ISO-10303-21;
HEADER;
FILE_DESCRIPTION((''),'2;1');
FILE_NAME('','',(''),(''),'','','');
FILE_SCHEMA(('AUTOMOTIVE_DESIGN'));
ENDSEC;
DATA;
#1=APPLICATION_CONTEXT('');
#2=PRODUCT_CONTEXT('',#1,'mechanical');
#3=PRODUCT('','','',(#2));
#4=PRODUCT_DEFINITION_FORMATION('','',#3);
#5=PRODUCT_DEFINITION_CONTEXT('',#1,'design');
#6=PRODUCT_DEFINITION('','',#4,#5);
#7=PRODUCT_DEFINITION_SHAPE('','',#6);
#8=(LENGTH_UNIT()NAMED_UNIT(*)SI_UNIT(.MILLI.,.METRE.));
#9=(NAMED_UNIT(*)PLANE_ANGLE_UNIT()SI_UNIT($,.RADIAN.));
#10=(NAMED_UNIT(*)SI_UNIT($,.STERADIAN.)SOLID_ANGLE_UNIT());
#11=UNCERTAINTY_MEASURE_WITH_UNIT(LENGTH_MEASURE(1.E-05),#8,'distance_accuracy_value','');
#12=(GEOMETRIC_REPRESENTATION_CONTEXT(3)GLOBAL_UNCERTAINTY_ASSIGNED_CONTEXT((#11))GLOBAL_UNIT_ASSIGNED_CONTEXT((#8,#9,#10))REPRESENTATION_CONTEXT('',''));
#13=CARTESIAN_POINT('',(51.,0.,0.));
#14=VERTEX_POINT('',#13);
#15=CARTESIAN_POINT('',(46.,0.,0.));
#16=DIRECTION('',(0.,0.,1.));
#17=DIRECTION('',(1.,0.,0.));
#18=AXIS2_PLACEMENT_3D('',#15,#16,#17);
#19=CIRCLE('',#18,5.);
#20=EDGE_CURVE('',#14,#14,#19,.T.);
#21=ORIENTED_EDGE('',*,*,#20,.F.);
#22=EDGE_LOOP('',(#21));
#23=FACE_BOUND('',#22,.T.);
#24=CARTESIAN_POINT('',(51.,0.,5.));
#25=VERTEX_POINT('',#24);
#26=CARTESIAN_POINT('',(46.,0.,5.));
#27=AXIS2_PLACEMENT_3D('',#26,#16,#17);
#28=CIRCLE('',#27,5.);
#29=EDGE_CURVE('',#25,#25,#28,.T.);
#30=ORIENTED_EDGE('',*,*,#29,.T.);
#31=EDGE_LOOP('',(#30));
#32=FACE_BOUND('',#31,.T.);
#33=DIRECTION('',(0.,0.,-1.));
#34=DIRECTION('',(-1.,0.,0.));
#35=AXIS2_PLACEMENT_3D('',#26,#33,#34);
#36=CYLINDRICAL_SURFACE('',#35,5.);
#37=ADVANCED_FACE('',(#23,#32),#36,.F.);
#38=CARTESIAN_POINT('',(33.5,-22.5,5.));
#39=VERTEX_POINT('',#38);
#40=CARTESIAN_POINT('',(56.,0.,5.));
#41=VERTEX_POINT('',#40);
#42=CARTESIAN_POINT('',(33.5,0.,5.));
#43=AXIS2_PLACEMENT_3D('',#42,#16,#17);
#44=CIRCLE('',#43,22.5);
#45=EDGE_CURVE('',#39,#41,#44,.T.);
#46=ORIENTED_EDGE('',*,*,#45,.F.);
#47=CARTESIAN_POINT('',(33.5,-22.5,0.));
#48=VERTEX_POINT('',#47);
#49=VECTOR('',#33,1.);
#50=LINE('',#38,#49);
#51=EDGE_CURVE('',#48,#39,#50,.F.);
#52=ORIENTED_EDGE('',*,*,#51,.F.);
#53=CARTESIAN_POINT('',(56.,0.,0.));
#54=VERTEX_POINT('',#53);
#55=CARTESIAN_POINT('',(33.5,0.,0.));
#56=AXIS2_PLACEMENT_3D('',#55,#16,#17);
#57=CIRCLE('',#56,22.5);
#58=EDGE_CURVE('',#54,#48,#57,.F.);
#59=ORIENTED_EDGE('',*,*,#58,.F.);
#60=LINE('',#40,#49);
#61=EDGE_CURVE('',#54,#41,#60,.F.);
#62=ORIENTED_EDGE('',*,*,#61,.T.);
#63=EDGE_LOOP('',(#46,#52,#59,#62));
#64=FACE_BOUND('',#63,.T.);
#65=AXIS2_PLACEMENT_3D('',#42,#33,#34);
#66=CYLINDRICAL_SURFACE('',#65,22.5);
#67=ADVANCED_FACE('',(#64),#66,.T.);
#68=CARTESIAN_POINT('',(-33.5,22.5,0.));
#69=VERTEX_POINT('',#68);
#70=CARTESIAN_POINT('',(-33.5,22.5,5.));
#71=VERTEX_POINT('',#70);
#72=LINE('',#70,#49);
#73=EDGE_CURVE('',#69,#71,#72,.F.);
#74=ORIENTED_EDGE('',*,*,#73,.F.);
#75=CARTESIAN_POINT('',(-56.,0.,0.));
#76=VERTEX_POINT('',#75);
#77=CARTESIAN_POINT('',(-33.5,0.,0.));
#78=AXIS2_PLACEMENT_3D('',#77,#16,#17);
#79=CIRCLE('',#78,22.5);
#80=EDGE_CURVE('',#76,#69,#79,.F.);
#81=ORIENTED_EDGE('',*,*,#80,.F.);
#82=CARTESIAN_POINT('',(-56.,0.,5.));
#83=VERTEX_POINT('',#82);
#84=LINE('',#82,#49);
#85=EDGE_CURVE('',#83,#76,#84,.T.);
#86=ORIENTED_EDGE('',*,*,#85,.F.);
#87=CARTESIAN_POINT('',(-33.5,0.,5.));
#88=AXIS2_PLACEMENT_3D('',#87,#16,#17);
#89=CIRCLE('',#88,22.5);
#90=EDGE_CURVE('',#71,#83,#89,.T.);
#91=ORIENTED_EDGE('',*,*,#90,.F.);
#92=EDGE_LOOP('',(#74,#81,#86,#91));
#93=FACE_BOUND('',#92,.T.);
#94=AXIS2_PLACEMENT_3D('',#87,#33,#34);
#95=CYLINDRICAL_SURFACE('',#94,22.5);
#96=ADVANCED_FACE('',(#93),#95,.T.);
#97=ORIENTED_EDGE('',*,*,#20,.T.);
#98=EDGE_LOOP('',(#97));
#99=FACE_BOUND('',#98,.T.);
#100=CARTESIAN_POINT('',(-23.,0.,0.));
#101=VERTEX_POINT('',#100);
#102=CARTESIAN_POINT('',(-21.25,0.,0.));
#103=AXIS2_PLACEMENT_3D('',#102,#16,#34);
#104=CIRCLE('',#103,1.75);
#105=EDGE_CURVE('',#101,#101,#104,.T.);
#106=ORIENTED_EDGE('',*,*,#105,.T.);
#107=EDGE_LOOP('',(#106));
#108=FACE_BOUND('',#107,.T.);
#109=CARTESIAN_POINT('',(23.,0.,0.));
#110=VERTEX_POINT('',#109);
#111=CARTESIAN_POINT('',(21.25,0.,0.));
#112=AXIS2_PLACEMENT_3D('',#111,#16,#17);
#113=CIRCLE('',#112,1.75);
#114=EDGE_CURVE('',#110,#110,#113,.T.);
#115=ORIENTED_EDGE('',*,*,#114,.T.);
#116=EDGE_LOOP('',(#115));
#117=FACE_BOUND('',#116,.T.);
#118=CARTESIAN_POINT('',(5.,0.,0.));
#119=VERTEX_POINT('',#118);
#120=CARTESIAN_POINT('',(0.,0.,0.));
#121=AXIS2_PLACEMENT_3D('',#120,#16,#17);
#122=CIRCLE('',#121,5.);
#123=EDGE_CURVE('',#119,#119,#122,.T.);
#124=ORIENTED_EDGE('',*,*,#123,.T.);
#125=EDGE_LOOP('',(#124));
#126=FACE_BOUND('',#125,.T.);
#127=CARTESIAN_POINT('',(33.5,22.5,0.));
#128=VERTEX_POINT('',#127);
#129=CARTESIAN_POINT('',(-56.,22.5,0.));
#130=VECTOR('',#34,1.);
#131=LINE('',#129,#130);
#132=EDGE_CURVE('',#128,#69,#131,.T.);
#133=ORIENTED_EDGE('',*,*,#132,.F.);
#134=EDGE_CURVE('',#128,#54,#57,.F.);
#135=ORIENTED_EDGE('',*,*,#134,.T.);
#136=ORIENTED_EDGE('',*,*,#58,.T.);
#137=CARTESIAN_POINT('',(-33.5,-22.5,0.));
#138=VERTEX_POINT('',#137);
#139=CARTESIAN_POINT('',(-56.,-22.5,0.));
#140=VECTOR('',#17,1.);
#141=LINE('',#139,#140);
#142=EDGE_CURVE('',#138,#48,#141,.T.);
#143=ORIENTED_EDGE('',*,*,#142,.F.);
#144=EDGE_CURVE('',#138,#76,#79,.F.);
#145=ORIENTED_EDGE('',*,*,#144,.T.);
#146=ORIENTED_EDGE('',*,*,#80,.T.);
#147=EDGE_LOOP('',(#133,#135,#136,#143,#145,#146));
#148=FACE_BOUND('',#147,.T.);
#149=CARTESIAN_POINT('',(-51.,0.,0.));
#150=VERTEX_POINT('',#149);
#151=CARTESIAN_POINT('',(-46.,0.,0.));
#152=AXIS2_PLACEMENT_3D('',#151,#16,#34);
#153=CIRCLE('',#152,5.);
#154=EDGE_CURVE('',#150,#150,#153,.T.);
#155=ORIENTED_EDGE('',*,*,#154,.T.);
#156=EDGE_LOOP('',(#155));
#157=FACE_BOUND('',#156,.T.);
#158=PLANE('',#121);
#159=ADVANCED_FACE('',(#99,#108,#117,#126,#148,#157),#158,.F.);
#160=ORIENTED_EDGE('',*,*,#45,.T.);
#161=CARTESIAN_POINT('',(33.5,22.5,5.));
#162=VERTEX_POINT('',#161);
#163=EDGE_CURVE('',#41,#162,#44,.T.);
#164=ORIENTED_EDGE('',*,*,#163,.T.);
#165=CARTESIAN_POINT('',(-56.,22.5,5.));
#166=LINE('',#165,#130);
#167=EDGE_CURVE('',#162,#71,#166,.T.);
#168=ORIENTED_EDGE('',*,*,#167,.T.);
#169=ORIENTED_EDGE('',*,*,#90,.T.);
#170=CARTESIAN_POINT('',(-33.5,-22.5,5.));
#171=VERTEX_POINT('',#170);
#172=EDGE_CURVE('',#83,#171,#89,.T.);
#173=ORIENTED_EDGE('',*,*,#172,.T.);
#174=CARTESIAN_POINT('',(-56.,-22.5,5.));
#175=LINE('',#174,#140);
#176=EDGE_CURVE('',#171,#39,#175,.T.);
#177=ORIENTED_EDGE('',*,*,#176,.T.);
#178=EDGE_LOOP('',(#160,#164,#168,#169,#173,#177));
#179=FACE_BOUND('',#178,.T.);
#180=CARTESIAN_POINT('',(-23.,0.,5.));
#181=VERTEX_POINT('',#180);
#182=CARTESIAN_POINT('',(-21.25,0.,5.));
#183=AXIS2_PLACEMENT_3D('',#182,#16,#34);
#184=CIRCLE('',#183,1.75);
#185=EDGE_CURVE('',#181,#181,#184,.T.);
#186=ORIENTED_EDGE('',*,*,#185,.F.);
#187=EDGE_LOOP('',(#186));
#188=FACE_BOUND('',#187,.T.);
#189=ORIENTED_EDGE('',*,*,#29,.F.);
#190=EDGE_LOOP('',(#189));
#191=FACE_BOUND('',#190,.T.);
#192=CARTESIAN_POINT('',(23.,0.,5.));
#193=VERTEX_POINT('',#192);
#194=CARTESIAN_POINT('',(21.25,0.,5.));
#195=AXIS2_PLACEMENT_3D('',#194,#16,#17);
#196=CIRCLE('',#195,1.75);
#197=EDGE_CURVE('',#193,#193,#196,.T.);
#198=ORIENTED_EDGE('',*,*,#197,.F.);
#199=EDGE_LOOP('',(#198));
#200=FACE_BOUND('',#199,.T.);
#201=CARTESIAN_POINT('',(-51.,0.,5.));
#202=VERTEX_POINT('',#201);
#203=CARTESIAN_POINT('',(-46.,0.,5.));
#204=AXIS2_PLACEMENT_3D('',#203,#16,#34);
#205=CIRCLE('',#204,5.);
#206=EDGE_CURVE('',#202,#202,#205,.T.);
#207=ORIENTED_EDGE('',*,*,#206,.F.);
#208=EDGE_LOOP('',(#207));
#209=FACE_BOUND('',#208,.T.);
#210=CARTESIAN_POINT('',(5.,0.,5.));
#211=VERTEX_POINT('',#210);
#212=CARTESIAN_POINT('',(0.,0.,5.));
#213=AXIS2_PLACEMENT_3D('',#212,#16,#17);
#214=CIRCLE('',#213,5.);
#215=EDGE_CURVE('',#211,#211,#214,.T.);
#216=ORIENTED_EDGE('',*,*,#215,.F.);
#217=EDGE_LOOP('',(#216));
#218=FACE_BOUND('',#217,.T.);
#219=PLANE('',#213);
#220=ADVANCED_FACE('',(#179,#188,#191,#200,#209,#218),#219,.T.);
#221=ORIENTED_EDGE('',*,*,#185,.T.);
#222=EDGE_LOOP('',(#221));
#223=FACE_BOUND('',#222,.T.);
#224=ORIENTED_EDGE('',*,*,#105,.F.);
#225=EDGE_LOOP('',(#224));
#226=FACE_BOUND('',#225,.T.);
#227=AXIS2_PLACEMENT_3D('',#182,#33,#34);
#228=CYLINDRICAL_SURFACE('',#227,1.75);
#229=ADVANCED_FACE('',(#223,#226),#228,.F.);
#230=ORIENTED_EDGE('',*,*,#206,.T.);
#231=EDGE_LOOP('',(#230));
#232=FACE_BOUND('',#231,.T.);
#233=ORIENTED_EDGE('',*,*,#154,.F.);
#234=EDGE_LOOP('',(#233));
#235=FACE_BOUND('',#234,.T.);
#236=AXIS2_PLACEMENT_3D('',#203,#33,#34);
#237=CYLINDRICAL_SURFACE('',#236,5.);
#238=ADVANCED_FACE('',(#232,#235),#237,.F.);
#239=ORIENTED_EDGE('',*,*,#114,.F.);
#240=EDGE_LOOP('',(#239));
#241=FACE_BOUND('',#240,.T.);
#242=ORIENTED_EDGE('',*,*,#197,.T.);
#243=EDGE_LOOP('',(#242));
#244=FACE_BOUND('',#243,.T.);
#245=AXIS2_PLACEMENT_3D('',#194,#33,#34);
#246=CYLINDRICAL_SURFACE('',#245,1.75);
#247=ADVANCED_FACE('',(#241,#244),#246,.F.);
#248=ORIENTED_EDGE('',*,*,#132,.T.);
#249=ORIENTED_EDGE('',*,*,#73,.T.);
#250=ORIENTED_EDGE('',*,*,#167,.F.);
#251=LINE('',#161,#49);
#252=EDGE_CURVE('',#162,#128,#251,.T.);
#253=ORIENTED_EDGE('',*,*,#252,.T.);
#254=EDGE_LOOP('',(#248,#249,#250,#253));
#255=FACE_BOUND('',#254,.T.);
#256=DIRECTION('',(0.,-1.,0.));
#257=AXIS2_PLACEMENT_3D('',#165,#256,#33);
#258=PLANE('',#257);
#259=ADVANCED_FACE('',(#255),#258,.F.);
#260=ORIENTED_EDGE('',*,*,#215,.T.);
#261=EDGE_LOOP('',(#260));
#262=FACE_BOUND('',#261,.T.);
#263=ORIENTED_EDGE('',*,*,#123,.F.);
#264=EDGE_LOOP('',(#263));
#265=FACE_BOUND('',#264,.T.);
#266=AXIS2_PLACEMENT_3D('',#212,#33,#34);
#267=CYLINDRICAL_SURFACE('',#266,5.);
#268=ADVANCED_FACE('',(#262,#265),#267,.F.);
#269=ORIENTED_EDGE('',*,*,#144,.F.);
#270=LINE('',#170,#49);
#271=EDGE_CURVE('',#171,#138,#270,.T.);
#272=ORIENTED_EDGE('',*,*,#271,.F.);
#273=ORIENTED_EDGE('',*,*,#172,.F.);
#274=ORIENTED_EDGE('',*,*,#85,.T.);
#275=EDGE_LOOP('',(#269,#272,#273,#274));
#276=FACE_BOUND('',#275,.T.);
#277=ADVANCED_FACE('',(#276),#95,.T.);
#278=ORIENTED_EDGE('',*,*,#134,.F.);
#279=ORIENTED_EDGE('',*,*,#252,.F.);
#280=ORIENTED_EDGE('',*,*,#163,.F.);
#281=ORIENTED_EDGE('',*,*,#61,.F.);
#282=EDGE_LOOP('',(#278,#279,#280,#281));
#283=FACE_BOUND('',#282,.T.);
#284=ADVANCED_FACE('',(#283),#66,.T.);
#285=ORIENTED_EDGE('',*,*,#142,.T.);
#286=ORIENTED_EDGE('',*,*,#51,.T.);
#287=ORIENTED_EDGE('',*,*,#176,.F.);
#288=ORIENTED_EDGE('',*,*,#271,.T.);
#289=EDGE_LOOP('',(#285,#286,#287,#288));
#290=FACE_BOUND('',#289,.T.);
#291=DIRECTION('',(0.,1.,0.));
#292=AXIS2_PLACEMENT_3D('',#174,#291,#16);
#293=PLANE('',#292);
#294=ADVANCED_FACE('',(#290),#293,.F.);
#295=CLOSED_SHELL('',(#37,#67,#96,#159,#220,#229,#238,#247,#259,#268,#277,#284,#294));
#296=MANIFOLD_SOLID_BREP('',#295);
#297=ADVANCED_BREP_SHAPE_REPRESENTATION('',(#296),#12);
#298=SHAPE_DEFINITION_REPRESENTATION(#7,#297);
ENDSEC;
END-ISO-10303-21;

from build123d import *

# Parameters (mm, degrees)
ESQUISSE1_W        = 112
ESQUISSE1_H        = 45
ESQUISSE1_R        = 1.75
ESQUISSE1_R_2      = 5
BOSS_EXTRU_1_DEPTH = 5
CONG_1_R           = 22.5


with BuildPart() as part:
    # Esquisse1 → Boss.-Extru.1 (new body)
    with BuildSketch(Plane.XY):
        Rectangle(ESQUISSE1_W, ESQUISSE1_H)
        with Locations((21.25, 0)):
            Circle(ESQUISSE1_R, mode=Mode.SUBTRACT)
        with Locations(Location((-21.25, 0, 0), (0, 0, 180))):
            Circle(ESQUISSE1_R, mode=Mode.SUBTRACT)
        with Locations((46, 0)):
            Circle(ESQUISSE1_R_2, mode=Mode.SUBTRACT)
        with Locations(Location((-46, 0, 0), (0, 0, 180))):
            Circle(ESQUISSE1_R_2, mode=Mode.SUBTRACT)
        Circle(ESQUISSE1_R_2, mode=Mode.SUBTRACT)
    extrude(amount=BOSS_EXTRU_1_DEPTH)

    # Congé1
    cong_1_edges = [part.edges().sort_by_distance(p)[0] for p in [
        (-56, -22.5, 2.5),
        (-56, 22.5, 2.5),
        (56, -22.5, 2.5),
        (56, 22.5, 2.5),
    ]]
    fillet(cong_1_edges, radius=CONG_1_R - 0.0001)  # a hair under: the kernel refuses the full size


solid = part.part
